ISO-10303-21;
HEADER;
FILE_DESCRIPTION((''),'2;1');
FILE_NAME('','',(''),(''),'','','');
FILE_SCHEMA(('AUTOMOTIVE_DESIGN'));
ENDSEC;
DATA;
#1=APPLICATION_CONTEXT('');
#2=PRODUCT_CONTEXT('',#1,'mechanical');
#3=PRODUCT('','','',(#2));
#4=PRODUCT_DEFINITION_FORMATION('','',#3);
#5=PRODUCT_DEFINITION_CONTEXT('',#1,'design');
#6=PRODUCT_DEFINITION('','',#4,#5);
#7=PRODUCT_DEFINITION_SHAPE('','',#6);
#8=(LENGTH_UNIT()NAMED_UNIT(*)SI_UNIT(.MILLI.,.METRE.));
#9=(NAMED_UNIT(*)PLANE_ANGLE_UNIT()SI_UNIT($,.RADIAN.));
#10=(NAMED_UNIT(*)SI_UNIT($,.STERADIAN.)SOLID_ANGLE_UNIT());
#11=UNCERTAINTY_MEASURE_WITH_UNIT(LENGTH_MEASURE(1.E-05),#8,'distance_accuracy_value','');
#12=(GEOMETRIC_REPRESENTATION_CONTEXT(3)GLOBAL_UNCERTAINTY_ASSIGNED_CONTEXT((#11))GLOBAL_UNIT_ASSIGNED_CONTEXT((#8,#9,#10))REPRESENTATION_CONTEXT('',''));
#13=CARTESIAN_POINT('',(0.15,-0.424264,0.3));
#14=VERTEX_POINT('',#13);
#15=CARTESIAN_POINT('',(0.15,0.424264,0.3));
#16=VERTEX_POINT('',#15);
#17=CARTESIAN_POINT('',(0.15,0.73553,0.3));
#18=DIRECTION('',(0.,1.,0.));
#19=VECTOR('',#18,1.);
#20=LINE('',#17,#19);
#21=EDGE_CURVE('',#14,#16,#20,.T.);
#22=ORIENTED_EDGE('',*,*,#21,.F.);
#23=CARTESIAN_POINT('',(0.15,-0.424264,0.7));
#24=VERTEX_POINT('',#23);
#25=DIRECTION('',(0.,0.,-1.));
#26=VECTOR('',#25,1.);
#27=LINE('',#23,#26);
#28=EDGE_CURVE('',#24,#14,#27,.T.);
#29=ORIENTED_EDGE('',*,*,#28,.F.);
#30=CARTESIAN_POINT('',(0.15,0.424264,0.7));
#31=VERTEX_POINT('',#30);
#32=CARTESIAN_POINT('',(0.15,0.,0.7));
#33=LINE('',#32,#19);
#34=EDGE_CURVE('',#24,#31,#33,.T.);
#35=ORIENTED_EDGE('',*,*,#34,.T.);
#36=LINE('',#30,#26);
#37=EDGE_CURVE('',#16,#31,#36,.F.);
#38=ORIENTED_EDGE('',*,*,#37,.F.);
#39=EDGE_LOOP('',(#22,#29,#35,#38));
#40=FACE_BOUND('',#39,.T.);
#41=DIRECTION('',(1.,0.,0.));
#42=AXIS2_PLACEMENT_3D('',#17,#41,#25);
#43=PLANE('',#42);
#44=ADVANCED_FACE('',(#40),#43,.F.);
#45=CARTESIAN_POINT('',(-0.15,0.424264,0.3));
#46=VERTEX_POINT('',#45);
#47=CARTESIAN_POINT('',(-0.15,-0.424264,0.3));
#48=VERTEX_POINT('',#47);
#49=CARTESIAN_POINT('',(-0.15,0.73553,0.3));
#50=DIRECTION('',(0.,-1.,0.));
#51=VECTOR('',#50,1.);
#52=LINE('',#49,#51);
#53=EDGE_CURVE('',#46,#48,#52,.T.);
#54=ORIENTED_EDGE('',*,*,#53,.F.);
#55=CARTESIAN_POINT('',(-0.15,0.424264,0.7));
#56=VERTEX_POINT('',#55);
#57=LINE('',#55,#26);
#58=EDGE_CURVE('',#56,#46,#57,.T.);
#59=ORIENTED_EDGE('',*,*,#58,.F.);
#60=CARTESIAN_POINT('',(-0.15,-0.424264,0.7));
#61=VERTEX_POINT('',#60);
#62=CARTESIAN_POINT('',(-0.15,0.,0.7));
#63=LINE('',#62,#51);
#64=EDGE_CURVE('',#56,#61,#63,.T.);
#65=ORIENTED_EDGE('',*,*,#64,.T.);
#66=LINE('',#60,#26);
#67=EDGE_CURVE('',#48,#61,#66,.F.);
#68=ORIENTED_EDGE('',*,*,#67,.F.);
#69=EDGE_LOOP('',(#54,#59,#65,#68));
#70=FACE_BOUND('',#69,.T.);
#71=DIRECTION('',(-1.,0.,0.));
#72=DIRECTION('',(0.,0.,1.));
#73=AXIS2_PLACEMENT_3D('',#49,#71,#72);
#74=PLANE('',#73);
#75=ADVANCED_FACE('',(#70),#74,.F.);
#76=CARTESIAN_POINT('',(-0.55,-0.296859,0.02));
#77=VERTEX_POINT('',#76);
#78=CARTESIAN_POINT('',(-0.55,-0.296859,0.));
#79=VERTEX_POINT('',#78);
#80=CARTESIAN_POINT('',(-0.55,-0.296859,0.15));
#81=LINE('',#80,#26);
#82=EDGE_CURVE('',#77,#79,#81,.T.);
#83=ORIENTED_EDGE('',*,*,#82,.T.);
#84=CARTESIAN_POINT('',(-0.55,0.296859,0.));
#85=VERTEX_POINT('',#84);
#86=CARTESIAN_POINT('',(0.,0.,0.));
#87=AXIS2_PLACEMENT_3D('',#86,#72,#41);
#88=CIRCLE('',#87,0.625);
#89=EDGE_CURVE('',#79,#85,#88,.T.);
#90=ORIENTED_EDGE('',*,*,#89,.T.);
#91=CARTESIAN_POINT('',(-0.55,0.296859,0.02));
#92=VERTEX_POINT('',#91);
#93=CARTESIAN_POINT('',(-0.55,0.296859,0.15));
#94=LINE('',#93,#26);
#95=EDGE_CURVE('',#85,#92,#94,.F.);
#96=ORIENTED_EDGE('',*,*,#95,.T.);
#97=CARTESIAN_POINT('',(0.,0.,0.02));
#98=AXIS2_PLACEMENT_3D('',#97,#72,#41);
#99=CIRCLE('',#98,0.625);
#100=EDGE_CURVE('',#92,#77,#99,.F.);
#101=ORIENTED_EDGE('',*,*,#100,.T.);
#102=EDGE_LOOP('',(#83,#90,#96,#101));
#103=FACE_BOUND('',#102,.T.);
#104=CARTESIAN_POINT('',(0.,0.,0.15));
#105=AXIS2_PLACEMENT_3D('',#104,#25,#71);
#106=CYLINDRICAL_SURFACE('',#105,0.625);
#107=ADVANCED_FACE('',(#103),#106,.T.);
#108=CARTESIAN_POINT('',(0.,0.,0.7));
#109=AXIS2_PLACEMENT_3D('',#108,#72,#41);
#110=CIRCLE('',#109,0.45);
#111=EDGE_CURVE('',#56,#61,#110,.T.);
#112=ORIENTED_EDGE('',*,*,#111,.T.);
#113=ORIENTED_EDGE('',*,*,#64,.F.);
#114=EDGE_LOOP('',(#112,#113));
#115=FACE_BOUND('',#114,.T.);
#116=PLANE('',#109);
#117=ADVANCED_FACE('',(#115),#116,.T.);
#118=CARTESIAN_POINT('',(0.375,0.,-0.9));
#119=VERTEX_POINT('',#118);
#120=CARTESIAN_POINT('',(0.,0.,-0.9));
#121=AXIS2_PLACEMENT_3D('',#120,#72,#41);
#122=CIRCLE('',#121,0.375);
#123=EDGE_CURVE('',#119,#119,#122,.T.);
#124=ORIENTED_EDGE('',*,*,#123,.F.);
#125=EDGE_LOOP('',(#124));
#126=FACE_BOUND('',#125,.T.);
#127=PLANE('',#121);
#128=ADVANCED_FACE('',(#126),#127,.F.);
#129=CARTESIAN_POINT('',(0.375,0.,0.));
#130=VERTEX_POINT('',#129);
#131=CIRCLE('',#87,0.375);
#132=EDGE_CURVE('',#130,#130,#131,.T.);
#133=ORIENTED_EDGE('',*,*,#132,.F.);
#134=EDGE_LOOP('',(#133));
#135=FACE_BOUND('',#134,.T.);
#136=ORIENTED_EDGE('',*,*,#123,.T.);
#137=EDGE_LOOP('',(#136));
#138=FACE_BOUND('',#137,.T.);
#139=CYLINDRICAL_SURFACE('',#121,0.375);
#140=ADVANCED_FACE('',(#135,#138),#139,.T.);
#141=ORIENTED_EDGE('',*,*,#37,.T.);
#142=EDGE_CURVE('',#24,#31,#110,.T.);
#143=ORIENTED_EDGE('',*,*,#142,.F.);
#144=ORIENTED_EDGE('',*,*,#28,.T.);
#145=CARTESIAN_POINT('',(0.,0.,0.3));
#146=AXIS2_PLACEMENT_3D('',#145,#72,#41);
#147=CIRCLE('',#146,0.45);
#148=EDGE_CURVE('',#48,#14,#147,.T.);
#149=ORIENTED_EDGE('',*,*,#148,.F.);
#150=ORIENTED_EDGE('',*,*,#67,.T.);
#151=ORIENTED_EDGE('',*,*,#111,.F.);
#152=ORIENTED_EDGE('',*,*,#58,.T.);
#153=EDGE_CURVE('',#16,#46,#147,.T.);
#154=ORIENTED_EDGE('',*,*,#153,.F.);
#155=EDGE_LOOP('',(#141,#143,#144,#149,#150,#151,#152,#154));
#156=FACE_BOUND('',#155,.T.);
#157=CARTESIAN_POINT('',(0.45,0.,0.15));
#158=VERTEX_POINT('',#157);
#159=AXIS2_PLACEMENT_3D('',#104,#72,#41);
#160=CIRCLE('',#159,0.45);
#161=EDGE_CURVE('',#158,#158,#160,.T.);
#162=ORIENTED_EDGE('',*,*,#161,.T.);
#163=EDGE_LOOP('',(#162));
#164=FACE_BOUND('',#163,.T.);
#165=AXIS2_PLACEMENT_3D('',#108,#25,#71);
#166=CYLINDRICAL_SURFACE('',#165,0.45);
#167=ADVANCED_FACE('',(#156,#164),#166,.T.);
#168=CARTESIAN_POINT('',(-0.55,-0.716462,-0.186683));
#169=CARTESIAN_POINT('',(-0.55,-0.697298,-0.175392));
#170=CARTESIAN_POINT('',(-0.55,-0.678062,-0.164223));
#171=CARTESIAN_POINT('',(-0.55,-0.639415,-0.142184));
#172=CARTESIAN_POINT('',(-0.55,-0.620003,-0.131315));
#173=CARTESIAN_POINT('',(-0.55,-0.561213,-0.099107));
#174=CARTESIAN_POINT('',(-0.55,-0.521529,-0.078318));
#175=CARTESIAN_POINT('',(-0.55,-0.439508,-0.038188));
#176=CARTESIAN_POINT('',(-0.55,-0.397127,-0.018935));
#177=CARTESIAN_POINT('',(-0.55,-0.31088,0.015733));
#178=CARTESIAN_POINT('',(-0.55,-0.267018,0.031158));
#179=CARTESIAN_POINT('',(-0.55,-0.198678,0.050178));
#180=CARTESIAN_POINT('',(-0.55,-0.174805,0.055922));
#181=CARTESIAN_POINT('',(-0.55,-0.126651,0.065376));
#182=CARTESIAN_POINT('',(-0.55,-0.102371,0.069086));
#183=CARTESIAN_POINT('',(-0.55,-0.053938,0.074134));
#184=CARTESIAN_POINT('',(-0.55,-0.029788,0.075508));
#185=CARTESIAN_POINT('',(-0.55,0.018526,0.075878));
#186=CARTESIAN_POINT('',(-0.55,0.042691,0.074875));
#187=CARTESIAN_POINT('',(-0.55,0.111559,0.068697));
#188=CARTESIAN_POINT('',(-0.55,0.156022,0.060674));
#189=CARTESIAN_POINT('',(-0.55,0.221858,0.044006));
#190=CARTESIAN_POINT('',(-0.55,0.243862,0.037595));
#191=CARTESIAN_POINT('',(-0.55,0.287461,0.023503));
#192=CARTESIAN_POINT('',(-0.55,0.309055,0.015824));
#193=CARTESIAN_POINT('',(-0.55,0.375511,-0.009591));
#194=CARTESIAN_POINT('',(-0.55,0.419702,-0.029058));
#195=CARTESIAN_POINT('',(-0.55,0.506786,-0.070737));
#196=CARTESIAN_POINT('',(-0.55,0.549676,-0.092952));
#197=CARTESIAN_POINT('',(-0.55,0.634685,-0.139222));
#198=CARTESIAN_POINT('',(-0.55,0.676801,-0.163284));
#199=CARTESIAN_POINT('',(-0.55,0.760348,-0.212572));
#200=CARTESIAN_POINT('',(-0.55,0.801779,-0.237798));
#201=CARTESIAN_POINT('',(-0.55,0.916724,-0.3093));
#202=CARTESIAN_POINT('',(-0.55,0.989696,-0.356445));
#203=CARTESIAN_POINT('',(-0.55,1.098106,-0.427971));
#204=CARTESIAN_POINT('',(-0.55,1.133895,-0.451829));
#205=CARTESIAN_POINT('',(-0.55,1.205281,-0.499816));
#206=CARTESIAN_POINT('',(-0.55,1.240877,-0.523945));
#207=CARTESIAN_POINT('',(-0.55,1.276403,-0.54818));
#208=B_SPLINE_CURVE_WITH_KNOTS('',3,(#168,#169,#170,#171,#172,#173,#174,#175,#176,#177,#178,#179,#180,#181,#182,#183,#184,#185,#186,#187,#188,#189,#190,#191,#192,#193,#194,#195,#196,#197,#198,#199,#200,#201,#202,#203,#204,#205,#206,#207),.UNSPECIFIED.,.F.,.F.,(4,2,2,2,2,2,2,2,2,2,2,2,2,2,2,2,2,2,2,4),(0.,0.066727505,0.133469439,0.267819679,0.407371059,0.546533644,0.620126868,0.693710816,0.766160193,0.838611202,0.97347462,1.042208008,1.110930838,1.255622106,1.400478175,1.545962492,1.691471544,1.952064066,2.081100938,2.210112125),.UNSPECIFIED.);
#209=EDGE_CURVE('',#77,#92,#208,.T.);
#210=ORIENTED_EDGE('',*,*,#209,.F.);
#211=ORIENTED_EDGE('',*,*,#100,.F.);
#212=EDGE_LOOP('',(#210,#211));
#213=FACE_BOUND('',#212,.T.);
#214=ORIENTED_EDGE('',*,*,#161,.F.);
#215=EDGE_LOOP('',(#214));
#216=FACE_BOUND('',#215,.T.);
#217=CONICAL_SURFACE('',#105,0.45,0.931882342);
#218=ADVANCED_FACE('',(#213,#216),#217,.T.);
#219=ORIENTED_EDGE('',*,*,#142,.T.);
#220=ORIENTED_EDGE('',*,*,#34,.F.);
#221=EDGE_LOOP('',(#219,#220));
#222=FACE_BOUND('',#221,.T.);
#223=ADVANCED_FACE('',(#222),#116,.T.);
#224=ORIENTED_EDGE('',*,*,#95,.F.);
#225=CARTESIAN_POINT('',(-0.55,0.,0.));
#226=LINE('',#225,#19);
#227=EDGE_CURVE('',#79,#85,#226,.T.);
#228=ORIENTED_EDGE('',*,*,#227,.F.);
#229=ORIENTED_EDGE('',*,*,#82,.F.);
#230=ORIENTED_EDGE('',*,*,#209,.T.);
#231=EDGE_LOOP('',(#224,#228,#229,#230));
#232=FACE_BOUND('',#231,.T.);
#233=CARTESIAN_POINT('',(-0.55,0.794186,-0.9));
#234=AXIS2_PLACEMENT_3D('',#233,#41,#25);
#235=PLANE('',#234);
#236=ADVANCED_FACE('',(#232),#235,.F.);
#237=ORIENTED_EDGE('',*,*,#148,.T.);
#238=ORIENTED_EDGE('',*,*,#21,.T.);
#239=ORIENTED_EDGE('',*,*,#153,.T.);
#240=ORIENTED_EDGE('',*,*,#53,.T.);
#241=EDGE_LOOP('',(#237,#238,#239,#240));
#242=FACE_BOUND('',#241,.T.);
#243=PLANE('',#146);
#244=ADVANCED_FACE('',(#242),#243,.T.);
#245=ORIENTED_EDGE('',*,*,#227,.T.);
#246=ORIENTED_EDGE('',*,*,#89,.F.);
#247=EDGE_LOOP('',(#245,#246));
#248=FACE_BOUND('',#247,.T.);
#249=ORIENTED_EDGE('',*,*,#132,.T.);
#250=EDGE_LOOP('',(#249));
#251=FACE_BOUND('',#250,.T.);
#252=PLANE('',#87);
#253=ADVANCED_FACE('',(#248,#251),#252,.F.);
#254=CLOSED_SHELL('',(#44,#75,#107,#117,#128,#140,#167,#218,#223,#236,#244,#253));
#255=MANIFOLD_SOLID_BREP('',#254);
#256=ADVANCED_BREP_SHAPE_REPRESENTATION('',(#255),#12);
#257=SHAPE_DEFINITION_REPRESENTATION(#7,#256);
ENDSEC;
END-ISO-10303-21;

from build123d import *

# Parameters (mm, degrees)
SKETCH1_R               = 0.375
BOSS_EXTRUDE1_DEPTH     = 0.9
SKETCH2_R               = 0.625
BOSS_EXTRUDE2_DEPTH     = 0.15
SKETCH3_R               = 0.45
BOSS_EXTRUDE3_DEPTH     = 0.55
SKETCH4_W               = 0.3
SKETCH4_H               = 1.514088174
CUT_EXTRUDE1_DEPTH      = 0.4
CHAMFER1_SIZE           = 0.13
CHAMFER1_SIZE_2         = 0.175
CUT_EXTRUDE2_DEPTH      = 2.261447581
CUT_EXTRUDE2_DEPTH_BACK = 2.261447581
SKETCH5_W               = 0.405583523
SKETCH5_H               = 1.586532149


with BuildPart() as part:
    # Sketch1 → Boss-Extrude1 (new body)
    with BuildSketch(Plane.XY):
        Circle(SKETCH1_R)
    extrude(amount=-BOSS_EXTRUDE1_DEPTH)

    # Sketch2 → Boss-Extrude2 (add)
    with BuildSketch(Plane.XY):
        Circle(SKETCH2_R)
    extrude(amount=BOSS_EXTRUDE2_DEPTH)

    # Sketch3 → Boss-Extrude3 (add)
    with BuildSketch(Plane.XY.offset(0.15)):
        Circle(SKETCH3_R)
    extrude(amount=BOSS_EXTRUDE3_DEPTH)

    # Sketch4 → Cut-Extrude1 (cut)
    with BuildSketch(Plane.XY.offset(0.7)):
        with Locations((0, -0.021514413)):
            Rectangle(SKETCH4_W, SKETCH4_H)
    extrude(amount=-CUT_EXTRUDE1_DEPTH, mode=Mode.SUBTRACT)

    # Chamfer1
    # the kernel refuses this chamfer: 0.175, 0.13 mm, written as the material it takes off along each edge
    with BuildSketch(Plane(origin=(0, 0, 0.15), x_dir=(1, 0, 0), z_dir=(0, -1, 0))) as chamfer1_piece_1_section:
        Polygon((0.625, -CHAMFER1_SIZE), (0.625 - CHAMFER1_SIZE_2, 0), (0.625, 0), align=None)
    chamfer1_piece_1 = revolve(axis=Axis((0, 0, 0.15), (0, 0, 1)), mode=Mode.PRIVATE)
    chamfer1_piece_1 = chamfer1_piece_1 - Plane(origin=(0, 0, 0.085771978), x_dir=(1, 0, 0), z_dir=(0, 0, -1)) * Cylinder(0.45, 3, mode=Mode.PRIVATE)
    add(chamfer1_piece_1, mode=Mode.SUBTRACT)

    # Sketch5 → Cut-Extrude2 (cut, two sides: drawn at the far end of the back side and taken through both)
    with BuildSketch(Plane.XY.offset(-CUT_EXTRUDE2_DEPTH_BACK)):
        with Locations((-0.752791762, 0.000920374)):
            Rectangle(SKETCH5_W, SKETCH5_H)
    extrude(amount=CUT_EXTRUDE2_DEPTH + CUT_EXTRUDE2_DEPTH_BACK, mode=Mode.SUBTRACT)


solid = part.part
